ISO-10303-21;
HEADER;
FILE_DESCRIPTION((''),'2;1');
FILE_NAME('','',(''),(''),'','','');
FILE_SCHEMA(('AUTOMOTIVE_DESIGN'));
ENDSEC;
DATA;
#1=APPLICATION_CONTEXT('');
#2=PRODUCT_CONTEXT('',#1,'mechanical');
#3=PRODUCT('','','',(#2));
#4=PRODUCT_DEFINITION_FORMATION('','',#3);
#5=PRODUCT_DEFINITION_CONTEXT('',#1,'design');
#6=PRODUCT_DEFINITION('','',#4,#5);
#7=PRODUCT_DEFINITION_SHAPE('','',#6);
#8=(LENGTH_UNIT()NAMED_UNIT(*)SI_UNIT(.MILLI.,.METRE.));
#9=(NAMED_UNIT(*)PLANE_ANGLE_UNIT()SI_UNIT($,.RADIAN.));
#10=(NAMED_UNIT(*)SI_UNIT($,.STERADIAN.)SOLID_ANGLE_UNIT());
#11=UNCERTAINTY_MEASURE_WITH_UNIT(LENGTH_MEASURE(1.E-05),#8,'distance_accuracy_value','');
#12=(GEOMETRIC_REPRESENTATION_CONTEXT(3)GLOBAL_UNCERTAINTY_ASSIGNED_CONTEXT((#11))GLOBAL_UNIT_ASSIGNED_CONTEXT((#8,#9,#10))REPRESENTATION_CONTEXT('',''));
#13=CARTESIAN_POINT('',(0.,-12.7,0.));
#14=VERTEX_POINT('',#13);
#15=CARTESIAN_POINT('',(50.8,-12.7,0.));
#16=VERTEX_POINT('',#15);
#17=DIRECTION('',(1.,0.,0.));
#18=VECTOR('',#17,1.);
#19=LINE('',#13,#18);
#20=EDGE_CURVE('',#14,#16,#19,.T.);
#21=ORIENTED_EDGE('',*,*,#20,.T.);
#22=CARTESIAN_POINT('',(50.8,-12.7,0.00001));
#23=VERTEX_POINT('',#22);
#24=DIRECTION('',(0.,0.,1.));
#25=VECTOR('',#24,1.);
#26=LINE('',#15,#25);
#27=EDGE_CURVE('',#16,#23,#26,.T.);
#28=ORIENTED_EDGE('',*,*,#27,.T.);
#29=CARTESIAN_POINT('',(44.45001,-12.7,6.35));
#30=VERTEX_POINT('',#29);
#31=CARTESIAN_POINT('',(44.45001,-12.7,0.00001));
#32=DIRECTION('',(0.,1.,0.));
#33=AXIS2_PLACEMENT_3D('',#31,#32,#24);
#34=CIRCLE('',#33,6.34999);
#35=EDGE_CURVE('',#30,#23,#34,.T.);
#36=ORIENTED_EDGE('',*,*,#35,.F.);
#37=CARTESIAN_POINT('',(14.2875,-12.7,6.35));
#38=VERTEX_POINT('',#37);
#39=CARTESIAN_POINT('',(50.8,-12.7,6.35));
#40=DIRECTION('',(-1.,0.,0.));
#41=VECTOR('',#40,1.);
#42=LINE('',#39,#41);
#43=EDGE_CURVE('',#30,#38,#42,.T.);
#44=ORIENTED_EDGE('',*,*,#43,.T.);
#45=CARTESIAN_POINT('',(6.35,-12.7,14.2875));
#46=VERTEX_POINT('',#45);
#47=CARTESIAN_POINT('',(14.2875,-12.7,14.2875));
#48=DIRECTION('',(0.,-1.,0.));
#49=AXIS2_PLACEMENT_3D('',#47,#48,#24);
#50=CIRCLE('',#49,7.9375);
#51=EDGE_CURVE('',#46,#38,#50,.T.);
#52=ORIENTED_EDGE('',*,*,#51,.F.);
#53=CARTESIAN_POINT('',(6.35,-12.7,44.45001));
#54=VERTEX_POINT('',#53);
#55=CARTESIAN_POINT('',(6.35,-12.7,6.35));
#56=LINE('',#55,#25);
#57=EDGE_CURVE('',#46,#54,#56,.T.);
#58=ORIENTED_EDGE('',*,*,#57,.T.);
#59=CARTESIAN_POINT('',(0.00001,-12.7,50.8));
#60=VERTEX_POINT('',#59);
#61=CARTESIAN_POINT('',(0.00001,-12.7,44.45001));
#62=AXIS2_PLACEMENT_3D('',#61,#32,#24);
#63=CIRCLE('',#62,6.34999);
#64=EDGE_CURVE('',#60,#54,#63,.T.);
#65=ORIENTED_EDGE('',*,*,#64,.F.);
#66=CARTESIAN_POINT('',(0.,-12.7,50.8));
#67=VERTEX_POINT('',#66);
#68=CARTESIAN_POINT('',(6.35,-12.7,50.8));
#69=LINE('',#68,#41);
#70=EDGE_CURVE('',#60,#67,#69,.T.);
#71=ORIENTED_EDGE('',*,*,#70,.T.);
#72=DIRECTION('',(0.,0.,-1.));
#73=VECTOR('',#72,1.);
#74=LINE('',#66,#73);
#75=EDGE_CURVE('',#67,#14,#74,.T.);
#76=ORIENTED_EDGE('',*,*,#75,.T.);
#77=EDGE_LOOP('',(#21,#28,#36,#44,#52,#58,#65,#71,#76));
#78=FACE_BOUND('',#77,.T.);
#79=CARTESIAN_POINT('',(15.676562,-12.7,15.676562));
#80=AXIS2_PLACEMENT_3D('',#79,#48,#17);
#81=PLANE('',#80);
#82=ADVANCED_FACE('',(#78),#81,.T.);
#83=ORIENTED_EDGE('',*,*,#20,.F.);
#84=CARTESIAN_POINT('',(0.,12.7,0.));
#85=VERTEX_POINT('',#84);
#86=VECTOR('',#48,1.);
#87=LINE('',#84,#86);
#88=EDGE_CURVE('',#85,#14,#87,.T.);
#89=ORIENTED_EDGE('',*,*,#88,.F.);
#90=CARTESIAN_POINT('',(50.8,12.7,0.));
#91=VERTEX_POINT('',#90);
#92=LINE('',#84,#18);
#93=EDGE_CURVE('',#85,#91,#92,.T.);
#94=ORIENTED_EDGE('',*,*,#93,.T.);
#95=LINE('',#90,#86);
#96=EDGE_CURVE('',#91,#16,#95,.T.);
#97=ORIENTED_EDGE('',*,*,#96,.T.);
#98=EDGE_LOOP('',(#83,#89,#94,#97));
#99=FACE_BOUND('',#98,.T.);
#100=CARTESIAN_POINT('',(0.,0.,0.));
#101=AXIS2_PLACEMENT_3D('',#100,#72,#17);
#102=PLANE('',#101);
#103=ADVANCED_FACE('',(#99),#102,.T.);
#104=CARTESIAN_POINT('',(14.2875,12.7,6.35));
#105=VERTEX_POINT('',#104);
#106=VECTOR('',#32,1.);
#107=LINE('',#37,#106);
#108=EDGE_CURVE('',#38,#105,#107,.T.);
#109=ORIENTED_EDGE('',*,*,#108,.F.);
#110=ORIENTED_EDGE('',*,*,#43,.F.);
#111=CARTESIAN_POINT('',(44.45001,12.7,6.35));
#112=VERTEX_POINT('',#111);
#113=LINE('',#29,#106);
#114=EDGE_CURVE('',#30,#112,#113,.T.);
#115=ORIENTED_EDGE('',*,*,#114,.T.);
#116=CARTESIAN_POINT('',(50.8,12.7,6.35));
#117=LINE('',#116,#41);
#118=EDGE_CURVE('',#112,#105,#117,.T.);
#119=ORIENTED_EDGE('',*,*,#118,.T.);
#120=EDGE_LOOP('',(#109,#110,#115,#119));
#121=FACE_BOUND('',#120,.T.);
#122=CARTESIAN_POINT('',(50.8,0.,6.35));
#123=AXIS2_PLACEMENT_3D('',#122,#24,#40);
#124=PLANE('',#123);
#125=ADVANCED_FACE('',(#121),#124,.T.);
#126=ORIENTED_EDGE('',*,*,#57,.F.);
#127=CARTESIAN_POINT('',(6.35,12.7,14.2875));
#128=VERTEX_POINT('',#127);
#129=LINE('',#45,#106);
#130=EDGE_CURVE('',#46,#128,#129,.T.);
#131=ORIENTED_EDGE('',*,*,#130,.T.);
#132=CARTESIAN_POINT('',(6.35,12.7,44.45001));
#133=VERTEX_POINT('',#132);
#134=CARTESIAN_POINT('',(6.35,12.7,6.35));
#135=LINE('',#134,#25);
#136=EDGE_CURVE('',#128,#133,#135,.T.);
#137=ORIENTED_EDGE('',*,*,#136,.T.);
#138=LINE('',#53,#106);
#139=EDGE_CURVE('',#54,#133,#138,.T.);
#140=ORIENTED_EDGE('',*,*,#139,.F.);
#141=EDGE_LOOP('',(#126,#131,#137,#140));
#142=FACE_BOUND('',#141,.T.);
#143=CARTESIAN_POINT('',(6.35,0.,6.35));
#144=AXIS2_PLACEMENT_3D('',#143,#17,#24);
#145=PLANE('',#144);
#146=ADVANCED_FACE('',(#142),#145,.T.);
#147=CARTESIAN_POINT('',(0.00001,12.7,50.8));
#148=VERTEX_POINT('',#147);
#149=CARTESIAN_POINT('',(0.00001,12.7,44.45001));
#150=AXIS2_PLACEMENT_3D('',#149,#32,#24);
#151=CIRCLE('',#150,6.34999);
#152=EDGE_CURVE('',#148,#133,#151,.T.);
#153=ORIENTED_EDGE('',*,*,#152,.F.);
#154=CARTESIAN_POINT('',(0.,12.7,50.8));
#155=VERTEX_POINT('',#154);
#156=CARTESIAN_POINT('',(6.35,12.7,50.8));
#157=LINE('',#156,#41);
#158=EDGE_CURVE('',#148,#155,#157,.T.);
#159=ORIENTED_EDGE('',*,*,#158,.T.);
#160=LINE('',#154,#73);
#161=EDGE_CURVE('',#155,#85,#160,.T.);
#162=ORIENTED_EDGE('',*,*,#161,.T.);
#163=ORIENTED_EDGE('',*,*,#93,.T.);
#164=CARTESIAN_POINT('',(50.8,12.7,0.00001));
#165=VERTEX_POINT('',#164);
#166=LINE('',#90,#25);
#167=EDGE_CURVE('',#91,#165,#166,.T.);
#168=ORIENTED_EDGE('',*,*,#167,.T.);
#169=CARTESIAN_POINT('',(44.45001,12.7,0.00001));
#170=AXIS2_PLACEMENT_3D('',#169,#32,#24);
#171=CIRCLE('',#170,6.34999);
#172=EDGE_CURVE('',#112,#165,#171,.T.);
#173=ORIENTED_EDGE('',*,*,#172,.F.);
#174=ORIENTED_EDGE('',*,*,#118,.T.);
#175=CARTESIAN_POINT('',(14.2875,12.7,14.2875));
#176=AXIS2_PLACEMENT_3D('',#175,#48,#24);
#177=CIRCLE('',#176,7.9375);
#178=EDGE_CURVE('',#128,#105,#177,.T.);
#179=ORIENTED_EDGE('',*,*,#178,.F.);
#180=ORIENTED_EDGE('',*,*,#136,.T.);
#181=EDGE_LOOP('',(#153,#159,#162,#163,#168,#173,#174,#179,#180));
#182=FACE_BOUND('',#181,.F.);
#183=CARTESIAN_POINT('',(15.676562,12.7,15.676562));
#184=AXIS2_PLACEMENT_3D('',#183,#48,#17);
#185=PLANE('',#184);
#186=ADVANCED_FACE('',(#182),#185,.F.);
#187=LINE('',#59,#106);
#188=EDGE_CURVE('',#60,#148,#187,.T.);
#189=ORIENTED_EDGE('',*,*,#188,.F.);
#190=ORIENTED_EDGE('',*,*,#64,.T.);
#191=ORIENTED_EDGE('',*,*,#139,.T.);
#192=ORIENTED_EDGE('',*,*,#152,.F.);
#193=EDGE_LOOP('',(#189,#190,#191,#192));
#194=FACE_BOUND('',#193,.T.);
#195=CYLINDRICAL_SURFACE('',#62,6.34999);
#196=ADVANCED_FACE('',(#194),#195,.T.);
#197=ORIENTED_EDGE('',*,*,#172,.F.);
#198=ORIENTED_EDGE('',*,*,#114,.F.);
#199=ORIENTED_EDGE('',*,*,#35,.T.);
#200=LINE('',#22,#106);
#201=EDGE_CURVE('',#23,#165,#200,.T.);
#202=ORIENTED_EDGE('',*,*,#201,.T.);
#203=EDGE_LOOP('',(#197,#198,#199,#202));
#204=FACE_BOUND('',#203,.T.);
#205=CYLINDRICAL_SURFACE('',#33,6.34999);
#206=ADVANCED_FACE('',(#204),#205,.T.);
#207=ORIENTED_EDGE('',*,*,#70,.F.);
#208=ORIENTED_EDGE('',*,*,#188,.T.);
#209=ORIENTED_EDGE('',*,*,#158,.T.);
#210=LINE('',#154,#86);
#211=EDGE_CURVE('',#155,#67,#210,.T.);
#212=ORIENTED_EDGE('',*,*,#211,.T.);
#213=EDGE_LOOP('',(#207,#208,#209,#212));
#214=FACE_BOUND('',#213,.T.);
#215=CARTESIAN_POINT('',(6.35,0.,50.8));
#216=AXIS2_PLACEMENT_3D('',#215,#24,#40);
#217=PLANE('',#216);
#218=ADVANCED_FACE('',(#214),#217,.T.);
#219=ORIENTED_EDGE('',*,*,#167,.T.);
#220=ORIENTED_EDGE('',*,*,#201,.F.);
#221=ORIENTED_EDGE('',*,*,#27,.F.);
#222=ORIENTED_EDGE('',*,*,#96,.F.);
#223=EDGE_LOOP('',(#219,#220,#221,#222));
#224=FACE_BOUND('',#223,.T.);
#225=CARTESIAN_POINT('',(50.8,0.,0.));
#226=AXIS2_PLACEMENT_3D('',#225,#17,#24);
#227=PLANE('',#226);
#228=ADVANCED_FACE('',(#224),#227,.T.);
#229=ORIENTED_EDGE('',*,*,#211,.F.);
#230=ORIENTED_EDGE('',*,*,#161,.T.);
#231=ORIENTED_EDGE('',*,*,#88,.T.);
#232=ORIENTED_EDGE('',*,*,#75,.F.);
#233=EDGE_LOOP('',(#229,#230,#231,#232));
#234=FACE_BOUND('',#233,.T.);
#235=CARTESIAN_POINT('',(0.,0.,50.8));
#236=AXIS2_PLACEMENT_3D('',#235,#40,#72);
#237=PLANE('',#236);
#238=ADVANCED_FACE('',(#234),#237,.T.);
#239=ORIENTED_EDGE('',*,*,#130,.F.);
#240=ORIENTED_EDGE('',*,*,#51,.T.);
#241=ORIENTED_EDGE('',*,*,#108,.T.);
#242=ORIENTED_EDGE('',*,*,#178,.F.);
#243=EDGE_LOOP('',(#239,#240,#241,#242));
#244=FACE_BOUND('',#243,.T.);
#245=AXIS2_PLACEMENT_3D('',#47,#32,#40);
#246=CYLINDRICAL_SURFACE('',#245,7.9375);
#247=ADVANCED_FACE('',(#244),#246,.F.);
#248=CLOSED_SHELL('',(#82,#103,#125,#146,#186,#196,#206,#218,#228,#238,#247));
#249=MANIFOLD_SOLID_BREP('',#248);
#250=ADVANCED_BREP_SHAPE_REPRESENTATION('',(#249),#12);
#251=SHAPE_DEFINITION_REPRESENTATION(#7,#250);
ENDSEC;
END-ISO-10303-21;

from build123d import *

# Parameters (mm, degrees)
F1_DEPTH = 12.7
F2_R     = 6.34999
F3_R     = 7.9375


# Not quite as in the source:
# - a fillet or chamfer is up to 0.001 mm smaller than in the source, because OpenCascade refuses the exact size


with BuildPart() as f1:
    # F0 (on Front) → F1 (new body, symmetric)
    with BuildSketch(Plane.XZ):
        Polygon((6.35, 50.8), (0, 50.8), (0, 0), (50.8, 0), (50.8, 6.35), (6.35, 6.35), align=None)
    extrude(amount=F1_DEPTH, both=True)

    # F2 (radius 6.35 in the source; OpenCascade refuses exactly that, so slightly less here)
    f2_edges = [f1.edges().sort_by_distance(p)[0] for p in [
        (6.35, 0, 50.8),
        (50.8, 0, 6.35),
    ]]
    fillet(f2_edges, radius=F2_R)

    # F3
    f3_edges = [f1.edges().sort_by_distance(p)[0] for p in [
        (6.35, 0, 6.35),
    ]]
    fillet(f3_edges, radius=F3_R)


solid = f1.part
